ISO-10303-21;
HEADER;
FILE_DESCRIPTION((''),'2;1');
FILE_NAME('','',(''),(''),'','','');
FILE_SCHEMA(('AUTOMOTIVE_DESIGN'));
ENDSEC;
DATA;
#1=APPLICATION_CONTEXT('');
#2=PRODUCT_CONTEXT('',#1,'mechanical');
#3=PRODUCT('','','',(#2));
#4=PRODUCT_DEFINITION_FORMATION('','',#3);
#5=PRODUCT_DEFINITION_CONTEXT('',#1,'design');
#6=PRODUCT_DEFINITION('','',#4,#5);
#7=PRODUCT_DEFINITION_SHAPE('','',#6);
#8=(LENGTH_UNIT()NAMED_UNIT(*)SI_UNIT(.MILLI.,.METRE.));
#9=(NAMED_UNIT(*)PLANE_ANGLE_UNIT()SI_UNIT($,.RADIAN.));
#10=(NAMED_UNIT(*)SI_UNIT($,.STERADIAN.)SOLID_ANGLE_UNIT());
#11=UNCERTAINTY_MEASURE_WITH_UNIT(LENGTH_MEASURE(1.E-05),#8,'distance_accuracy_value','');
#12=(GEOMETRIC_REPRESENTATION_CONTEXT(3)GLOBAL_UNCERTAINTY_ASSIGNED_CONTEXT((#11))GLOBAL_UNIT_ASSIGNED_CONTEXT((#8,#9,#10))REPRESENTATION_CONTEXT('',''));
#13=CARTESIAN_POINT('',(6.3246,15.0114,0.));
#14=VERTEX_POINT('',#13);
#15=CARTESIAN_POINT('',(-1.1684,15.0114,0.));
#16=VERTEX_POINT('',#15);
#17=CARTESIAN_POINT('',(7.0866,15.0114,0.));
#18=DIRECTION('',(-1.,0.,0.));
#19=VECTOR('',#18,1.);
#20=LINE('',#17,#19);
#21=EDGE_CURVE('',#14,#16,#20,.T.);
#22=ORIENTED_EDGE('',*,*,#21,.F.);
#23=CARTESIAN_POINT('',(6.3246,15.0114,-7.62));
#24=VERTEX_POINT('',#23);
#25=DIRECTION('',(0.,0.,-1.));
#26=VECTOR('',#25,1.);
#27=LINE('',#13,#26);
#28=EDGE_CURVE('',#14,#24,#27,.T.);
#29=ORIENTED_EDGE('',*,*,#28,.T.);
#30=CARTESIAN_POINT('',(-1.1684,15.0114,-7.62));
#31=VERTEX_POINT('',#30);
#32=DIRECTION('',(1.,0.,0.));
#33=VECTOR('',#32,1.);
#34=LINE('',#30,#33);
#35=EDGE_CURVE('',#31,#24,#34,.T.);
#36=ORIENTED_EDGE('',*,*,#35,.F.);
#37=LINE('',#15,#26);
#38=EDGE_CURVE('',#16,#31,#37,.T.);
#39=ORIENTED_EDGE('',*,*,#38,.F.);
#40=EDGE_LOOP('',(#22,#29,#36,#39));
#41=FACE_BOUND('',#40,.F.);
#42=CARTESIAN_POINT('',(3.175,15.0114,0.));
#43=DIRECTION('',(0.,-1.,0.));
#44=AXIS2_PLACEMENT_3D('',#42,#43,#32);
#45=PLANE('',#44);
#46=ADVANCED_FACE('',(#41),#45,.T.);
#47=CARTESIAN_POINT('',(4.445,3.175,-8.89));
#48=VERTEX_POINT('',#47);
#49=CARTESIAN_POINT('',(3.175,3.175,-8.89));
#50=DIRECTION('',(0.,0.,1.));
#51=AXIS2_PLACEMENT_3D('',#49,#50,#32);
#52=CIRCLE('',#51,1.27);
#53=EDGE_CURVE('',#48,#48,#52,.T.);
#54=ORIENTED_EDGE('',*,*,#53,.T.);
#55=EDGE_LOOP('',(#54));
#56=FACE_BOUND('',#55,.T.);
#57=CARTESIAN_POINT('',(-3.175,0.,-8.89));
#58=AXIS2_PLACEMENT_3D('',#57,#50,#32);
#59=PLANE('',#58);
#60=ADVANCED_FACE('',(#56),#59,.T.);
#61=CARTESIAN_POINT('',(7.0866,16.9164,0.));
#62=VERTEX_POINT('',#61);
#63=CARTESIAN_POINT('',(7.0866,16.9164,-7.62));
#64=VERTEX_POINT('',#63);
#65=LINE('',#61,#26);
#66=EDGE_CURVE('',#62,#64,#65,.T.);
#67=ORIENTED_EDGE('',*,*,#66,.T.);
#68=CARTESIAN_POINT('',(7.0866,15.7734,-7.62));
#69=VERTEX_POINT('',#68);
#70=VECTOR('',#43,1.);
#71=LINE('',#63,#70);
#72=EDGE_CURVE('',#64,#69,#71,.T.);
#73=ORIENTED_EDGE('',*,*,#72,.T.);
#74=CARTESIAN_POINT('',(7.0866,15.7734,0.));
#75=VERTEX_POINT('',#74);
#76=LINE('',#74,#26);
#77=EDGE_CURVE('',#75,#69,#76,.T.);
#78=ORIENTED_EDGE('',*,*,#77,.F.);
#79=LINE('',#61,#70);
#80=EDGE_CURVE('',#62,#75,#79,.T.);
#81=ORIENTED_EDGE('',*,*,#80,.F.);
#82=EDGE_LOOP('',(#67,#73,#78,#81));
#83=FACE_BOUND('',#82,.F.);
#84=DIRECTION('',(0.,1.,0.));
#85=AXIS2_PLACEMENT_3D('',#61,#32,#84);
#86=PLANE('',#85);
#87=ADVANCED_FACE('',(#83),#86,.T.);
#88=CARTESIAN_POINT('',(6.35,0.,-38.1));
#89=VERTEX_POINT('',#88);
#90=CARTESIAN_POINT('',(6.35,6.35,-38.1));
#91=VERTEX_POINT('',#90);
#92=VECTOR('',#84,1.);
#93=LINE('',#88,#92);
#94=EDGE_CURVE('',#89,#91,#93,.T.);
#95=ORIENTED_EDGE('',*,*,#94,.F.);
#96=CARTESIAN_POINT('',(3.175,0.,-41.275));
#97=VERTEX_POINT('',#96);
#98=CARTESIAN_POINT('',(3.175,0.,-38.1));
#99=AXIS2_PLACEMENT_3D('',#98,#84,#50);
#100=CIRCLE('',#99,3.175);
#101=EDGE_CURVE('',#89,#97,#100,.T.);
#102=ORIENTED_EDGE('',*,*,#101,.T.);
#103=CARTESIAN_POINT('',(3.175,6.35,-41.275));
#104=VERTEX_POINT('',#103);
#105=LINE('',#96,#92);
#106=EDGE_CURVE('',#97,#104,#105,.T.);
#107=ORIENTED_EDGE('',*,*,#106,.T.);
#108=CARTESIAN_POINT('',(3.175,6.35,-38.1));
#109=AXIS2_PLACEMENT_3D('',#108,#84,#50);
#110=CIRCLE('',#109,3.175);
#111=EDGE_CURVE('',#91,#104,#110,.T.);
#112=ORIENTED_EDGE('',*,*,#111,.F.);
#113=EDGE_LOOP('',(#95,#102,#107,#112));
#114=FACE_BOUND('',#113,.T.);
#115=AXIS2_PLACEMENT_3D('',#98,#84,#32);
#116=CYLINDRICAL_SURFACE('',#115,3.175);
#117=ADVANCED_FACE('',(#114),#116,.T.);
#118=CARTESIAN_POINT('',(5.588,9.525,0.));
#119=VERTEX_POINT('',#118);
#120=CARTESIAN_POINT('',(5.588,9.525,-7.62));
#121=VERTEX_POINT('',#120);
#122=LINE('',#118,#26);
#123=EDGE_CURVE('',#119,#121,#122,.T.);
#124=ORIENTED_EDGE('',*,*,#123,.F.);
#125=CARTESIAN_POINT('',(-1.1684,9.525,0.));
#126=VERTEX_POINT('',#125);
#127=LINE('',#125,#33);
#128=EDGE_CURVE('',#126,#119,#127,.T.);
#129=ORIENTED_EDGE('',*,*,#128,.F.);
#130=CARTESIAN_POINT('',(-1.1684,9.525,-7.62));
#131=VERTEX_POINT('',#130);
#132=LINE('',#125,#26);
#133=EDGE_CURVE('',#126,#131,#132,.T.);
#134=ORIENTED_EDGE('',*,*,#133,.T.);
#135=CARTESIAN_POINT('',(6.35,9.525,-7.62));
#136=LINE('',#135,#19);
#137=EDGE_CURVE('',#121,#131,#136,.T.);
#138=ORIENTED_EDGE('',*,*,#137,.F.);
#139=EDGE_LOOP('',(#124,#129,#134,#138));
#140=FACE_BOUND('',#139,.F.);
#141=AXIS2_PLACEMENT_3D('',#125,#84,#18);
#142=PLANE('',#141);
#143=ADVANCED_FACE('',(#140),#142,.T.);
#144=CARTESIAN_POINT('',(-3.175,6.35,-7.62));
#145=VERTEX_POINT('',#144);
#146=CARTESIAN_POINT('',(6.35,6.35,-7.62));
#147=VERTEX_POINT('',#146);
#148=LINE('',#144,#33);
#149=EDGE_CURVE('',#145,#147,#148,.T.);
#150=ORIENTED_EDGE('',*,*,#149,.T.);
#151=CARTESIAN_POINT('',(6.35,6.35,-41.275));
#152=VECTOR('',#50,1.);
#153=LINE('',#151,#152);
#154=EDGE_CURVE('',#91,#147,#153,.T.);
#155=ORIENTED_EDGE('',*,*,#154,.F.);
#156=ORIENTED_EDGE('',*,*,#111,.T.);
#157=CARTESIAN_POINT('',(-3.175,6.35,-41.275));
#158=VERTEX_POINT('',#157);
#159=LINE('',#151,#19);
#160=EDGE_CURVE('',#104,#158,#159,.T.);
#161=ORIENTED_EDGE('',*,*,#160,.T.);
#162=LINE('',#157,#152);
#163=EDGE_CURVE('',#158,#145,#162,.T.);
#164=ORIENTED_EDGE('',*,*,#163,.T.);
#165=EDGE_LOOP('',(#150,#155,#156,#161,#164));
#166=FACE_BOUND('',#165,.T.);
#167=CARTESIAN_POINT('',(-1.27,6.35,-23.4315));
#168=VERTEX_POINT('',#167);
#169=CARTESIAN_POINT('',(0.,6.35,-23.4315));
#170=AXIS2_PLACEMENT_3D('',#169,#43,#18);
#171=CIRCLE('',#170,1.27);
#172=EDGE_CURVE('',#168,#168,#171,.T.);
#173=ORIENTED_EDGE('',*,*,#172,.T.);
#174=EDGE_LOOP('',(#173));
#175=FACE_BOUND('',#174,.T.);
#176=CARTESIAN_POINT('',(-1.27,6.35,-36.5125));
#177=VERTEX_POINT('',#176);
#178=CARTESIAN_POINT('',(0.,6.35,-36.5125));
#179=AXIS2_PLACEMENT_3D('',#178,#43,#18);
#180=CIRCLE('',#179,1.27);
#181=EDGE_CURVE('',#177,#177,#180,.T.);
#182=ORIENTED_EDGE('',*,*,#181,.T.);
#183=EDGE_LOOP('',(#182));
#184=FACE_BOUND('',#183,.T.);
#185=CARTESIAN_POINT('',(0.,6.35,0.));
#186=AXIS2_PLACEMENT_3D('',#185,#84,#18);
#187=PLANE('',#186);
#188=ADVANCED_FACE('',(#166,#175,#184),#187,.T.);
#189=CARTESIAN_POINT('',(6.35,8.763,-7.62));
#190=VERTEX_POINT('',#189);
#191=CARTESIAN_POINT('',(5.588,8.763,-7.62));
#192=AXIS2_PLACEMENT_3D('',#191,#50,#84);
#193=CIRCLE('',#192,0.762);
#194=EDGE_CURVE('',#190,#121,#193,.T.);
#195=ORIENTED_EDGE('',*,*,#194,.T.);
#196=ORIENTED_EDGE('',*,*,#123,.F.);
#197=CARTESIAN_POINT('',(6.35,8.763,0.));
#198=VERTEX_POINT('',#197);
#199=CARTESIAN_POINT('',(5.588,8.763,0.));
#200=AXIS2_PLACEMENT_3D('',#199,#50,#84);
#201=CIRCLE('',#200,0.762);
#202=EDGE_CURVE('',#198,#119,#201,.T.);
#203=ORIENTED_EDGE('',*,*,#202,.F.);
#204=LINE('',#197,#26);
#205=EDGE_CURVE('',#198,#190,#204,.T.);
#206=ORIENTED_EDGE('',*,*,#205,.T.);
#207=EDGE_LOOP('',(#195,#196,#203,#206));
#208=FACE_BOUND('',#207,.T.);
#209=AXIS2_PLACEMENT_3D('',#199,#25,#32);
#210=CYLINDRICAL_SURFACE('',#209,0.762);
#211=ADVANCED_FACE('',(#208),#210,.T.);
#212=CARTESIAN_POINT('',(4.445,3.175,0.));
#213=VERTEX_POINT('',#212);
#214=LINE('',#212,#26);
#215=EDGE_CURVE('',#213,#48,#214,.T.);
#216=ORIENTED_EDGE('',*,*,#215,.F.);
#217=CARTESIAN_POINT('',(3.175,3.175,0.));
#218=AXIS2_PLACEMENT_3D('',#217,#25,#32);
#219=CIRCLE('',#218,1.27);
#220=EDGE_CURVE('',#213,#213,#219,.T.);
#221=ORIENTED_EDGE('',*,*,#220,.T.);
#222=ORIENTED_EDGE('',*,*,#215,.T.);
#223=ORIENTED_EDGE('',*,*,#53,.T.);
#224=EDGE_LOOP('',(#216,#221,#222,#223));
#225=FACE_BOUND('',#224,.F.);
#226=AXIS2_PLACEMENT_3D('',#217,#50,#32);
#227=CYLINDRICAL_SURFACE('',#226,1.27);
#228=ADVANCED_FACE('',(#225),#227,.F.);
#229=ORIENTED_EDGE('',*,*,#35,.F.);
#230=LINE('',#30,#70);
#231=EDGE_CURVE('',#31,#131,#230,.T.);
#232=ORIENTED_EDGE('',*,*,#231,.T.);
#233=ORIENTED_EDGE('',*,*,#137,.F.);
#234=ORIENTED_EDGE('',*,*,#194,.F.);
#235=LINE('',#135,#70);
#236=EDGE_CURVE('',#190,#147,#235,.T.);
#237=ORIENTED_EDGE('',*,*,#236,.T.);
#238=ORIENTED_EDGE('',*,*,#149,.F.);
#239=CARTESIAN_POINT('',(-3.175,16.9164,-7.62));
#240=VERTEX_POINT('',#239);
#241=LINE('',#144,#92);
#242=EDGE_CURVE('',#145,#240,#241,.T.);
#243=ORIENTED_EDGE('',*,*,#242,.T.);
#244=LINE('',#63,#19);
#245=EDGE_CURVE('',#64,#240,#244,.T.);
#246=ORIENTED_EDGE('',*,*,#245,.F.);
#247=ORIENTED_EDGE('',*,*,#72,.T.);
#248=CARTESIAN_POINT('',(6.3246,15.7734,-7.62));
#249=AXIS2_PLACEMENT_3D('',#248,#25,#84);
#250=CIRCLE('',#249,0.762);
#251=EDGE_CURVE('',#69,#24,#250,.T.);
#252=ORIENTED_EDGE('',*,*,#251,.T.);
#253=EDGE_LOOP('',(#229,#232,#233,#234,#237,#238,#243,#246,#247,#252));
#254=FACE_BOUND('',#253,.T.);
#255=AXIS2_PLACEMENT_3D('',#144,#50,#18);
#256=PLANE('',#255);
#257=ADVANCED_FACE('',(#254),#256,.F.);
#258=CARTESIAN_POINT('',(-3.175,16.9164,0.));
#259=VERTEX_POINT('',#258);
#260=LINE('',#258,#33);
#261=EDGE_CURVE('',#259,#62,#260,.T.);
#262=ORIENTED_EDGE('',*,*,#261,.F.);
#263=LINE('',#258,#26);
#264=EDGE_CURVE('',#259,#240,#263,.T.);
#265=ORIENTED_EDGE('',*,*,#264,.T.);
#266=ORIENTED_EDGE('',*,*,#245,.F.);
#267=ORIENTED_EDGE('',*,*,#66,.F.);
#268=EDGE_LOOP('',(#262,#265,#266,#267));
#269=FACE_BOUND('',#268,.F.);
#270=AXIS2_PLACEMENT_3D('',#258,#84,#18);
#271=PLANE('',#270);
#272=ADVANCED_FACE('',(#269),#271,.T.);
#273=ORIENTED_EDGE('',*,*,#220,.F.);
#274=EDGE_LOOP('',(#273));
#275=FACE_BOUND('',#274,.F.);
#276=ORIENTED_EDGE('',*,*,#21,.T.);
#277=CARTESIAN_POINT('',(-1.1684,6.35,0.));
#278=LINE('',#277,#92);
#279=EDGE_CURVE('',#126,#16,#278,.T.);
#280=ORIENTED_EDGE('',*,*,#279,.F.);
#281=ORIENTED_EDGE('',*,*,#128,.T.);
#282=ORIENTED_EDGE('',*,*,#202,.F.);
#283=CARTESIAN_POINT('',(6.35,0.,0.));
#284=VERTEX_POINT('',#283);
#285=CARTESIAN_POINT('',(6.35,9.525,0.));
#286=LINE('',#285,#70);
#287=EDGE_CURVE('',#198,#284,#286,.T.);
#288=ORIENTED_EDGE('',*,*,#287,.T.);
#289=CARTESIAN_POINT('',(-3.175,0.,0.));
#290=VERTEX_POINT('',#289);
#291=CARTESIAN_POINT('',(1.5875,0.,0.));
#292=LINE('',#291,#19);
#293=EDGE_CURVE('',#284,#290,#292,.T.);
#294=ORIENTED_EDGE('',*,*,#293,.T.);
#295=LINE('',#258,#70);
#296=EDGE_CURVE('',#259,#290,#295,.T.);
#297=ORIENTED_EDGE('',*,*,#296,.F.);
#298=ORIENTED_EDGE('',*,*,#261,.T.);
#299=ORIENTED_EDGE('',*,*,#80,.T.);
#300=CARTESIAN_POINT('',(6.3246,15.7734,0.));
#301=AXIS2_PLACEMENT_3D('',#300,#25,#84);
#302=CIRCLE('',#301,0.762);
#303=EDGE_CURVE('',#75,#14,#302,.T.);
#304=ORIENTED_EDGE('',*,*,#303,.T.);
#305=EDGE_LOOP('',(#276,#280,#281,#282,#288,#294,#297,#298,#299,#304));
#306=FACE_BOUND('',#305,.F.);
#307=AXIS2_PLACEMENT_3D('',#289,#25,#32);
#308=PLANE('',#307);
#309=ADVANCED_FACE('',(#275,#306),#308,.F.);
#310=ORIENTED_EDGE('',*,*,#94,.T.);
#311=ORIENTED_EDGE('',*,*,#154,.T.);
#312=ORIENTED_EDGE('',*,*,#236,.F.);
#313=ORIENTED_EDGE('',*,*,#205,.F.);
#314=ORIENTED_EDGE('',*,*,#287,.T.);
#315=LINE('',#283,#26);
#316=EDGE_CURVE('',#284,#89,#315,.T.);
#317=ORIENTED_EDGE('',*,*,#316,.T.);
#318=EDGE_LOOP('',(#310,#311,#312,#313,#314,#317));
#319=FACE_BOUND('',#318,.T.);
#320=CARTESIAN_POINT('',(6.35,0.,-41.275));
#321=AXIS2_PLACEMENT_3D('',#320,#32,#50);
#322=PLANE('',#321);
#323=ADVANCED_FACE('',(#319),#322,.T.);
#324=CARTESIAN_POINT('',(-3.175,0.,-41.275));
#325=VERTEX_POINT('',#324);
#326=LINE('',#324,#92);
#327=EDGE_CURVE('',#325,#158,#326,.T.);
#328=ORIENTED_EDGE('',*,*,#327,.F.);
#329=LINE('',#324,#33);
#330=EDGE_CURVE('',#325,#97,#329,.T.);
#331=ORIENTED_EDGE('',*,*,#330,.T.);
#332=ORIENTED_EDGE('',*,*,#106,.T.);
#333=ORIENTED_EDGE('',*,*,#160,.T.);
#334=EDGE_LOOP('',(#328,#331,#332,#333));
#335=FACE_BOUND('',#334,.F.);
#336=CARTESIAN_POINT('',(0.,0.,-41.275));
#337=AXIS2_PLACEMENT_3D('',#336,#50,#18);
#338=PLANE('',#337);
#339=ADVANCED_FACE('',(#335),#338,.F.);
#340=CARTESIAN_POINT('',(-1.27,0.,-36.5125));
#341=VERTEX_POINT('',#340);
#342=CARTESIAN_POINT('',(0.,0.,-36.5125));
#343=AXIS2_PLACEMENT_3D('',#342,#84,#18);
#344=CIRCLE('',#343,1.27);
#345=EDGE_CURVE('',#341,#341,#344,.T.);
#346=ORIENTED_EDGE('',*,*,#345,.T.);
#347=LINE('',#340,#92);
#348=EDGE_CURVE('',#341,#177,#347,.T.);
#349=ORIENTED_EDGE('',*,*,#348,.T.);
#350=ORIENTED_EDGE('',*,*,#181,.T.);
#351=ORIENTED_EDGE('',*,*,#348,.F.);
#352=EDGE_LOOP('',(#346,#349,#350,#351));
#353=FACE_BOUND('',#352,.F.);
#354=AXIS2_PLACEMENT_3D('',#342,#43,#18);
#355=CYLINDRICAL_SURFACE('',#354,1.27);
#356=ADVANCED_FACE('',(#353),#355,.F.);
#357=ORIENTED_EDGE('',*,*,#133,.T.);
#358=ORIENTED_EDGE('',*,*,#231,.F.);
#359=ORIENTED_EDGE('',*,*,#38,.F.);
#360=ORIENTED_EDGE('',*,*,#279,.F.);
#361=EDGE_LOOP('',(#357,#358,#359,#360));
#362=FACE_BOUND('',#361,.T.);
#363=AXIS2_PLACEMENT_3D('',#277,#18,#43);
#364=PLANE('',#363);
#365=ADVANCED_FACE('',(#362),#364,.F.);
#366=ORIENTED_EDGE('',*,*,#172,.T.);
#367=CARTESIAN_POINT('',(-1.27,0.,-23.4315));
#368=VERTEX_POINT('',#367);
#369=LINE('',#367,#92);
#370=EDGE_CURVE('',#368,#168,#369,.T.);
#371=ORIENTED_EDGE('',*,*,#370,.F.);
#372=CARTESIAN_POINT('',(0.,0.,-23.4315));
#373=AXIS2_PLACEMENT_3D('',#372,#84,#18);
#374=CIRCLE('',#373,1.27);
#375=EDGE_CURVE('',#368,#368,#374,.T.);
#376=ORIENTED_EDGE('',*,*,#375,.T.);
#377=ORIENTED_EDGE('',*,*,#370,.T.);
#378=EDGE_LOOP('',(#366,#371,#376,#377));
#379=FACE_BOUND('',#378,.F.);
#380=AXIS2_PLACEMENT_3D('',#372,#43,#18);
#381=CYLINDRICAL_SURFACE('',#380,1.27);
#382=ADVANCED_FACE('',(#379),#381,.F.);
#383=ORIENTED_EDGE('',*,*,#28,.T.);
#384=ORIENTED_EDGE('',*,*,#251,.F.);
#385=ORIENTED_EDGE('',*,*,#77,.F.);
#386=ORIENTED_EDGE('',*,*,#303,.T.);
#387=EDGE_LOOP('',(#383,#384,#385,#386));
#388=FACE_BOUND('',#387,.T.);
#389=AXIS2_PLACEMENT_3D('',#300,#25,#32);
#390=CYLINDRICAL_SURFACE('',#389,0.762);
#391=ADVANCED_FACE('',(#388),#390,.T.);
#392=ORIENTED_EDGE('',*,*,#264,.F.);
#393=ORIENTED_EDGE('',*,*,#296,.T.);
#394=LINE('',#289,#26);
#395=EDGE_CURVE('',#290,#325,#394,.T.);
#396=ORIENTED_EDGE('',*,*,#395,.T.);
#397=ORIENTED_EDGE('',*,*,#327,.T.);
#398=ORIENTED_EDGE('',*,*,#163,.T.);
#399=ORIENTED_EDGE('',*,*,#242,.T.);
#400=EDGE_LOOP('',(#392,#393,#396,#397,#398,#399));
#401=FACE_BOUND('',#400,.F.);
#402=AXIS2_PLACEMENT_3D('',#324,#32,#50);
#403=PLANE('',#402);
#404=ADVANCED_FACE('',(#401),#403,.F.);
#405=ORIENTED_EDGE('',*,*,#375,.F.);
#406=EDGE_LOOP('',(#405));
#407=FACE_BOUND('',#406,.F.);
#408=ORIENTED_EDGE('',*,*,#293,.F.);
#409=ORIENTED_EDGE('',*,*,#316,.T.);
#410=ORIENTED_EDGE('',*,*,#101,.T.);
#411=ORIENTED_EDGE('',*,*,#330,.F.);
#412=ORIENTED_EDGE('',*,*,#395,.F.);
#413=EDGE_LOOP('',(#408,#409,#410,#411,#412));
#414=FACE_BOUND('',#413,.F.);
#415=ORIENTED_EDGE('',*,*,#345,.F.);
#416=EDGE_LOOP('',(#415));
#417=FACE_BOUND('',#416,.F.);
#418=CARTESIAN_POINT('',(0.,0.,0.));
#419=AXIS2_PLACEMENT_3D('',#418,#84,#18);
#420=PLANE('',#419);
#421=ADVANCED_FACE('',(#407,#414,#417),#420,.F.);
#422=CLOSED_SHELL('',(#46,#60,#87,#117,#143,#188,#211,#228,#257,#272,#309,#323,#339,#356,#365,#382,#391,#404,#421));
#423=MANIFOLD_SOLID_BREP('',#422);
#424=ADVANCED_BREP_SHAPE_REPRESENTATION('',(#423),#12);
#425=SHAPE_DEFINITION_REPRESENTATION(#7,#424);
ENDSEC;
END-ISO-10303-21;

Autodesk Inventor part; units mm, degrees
ref_plane "YZ Plane" through (0, 0, 0) normal (1, 0, 0) x (0, 1, 0)
ref_plane "XZ Plane" through (0, 0, 0) normal (0, 1, 0) x (-1, 0, 0)
sketch "Sketch1" plane through (0, 0, 0) normal (0, 1, 0) x (-1, 0, 0)
  line L0 (0, 0) -> (0, -41.275)
  line L1 (0, -41.275) -> (0, -36.5125)
  line L2 (0, -36.5125) -> (0, -23.4315)
  circle A0 centre (0, -36.5125) radius 1.27
  circle A1 centre (0, -23.4315) radius 1.27
  line L3 (0, -41.275) -> (3.175, -41.275)
  line L4 (3.175, -41.275) -> (3.175, 0)
  line L5 (3.175, 0) -> (0, 0)
  line L6 (0, -41.275) -> (-6.35, -41.275)
  line L7 (-6.35, -41.275) -> (-6.35, 0)
  line L8 (-6.35, 0) -> (0, 0)
  dimension "d0" = 41.275
  dimension "d1" = 4.7625
  dimension "d2" = 13.081
  dimension "d3" = 2.54
  dimension "d4" = 2.54
  dimension "d5" = 3.175
  dimension "d6" = 6.35
extrude "Extrusion1" add sketch "Sketch1" along normal blind 6.35
extrude "Extrusion2" cut sketch "Sketch1" along normal blind 6.35 contours A1 L0 | L0 A1 | A0 L0 | L0 A0
sketch "Sketch3" plane through (-3.175, 0, 0) normal (0, 0, 1) x (1, 0, 0)
  line L0 (0, 0) -> (9.525, 0) projected
  line L1 (9.525, 0) -> (9.525, 6.35) projected
  line L2 (0, 6.35) -> (9.525, 6.35) projected
  line L3 (0, 0) -> (0, 6.35) projected
  circle A0 centre (6.35, 3.175) radius 1.27
  line L4 (6.35, 3.175) -> (2.0066, 3.175)
  line L5 (2.0066, 3.175) -> (2.0066, 0)
  line L6 (9.525, 0) -> (0, 0) projected
  line L7 (6.35, 3.175) -> (6.35, -8.6614)
  line L8 (2.0066, 0) -> (2.0066, -8.6614)
  line L9 (2.0066, -8.6614) -> (2.0066, -10.5664)
  line L10 (2.0066, -10.5664) -> (10.2616, -10.5664)
  line L11 (10.2616, -10.5664) -> (10.2616, -8.6614)
  line L12 (10.2616, -8.6614) -> (6.35, -8.6614)
  line L13 (0, 0) -> (0, -10.5664)
  line L14 (0, -10.5664) -> (2.0066, -10.5664)
  line L15 (0, 0) -> (2.0066, 0)
  line L16 (6.35, -8.6614) -> (2.0066, -8.6614)
  line L17 (2.0066, -8.6614) -> (2.0066, 0)
  line L18 (6.35, 3.175) -> (6.35, -3.175)
  line L19 (9.525, 0) -> (2.0066, 0)
  line L20 (2.0066, 0) -> (2.0066, -3.175)
  line L21 (2.0066, -3.175) -> (9.525, -3.175)
  line L22 (9.525, -3.175) -> (9.525, 0)
  point P0 (3.175, 0)
  dimension "d11" = 2.54
  dimension "d14" = 3.175
  dimension "d15" = 9.525
  dimension "d16" = 4.3434
  dimension "d17" = 11.8364
  dimension "d18" = 1.905
  dimension "d19" = 8.255
  dimension "d22" = 6.35
extrude "Extrusion3" cut sketch "Sketch3" against normal blind 8.89 contours L7 L4 A0 | A0 L4 L7
extrude "Extrusion4" add sketch "Sketch3" against normal blind 7.62 contours L0 L8 L9 L14 L13 | L9 L16 L12 L11 L10
extrude "Extrusion5" add sketch "Sketch3" against normal blind 7.62 contours L0 L7 L21 L8 | L0 L22 L21 L7
fillet "Fillet1" radius 3.175 1 edges at (6.35, 3.175, -41.275)
fillet "Fillet2" radius 0.762 2 edges at (6.35, -3.175, -3.81) (7.0866, -8.6614, -3.81)
ref_plane "Work Plane1" through (0, 3.175, 0) normal (0, -1, 0) x (1, 0, 0)
mirror "Mirror1" about plane through (0, 3.175, 0) normal (0, -1, 0) of "Extrusion4", "Fillet2", "Extrusion5"
sketch "Sketch4" plane through (6.35, 0, -7.62) normal (1, 0, 0) x (0, 0, -1)
  line L0 (33.655, 0) -> (0, 0) projected
  line L1 (3.7313, 0) -> (-10.4318, 0)
  line L2 (-10.4318, 0) -> (-10.4318, -14.3979)
  line L3 (-10.4318, -14.3979) -> (3.7313, -14.3979)
  line L4 (3.7313, -14.3979) -> (3.7313, 0)
  point P0 (-7.62, 0)
extrude "Extrusion6" cut sketch "Sketch4" along normal blind 25.4 and the other way blind 12.7
properties part number "photoTransistorHolderLeft"
